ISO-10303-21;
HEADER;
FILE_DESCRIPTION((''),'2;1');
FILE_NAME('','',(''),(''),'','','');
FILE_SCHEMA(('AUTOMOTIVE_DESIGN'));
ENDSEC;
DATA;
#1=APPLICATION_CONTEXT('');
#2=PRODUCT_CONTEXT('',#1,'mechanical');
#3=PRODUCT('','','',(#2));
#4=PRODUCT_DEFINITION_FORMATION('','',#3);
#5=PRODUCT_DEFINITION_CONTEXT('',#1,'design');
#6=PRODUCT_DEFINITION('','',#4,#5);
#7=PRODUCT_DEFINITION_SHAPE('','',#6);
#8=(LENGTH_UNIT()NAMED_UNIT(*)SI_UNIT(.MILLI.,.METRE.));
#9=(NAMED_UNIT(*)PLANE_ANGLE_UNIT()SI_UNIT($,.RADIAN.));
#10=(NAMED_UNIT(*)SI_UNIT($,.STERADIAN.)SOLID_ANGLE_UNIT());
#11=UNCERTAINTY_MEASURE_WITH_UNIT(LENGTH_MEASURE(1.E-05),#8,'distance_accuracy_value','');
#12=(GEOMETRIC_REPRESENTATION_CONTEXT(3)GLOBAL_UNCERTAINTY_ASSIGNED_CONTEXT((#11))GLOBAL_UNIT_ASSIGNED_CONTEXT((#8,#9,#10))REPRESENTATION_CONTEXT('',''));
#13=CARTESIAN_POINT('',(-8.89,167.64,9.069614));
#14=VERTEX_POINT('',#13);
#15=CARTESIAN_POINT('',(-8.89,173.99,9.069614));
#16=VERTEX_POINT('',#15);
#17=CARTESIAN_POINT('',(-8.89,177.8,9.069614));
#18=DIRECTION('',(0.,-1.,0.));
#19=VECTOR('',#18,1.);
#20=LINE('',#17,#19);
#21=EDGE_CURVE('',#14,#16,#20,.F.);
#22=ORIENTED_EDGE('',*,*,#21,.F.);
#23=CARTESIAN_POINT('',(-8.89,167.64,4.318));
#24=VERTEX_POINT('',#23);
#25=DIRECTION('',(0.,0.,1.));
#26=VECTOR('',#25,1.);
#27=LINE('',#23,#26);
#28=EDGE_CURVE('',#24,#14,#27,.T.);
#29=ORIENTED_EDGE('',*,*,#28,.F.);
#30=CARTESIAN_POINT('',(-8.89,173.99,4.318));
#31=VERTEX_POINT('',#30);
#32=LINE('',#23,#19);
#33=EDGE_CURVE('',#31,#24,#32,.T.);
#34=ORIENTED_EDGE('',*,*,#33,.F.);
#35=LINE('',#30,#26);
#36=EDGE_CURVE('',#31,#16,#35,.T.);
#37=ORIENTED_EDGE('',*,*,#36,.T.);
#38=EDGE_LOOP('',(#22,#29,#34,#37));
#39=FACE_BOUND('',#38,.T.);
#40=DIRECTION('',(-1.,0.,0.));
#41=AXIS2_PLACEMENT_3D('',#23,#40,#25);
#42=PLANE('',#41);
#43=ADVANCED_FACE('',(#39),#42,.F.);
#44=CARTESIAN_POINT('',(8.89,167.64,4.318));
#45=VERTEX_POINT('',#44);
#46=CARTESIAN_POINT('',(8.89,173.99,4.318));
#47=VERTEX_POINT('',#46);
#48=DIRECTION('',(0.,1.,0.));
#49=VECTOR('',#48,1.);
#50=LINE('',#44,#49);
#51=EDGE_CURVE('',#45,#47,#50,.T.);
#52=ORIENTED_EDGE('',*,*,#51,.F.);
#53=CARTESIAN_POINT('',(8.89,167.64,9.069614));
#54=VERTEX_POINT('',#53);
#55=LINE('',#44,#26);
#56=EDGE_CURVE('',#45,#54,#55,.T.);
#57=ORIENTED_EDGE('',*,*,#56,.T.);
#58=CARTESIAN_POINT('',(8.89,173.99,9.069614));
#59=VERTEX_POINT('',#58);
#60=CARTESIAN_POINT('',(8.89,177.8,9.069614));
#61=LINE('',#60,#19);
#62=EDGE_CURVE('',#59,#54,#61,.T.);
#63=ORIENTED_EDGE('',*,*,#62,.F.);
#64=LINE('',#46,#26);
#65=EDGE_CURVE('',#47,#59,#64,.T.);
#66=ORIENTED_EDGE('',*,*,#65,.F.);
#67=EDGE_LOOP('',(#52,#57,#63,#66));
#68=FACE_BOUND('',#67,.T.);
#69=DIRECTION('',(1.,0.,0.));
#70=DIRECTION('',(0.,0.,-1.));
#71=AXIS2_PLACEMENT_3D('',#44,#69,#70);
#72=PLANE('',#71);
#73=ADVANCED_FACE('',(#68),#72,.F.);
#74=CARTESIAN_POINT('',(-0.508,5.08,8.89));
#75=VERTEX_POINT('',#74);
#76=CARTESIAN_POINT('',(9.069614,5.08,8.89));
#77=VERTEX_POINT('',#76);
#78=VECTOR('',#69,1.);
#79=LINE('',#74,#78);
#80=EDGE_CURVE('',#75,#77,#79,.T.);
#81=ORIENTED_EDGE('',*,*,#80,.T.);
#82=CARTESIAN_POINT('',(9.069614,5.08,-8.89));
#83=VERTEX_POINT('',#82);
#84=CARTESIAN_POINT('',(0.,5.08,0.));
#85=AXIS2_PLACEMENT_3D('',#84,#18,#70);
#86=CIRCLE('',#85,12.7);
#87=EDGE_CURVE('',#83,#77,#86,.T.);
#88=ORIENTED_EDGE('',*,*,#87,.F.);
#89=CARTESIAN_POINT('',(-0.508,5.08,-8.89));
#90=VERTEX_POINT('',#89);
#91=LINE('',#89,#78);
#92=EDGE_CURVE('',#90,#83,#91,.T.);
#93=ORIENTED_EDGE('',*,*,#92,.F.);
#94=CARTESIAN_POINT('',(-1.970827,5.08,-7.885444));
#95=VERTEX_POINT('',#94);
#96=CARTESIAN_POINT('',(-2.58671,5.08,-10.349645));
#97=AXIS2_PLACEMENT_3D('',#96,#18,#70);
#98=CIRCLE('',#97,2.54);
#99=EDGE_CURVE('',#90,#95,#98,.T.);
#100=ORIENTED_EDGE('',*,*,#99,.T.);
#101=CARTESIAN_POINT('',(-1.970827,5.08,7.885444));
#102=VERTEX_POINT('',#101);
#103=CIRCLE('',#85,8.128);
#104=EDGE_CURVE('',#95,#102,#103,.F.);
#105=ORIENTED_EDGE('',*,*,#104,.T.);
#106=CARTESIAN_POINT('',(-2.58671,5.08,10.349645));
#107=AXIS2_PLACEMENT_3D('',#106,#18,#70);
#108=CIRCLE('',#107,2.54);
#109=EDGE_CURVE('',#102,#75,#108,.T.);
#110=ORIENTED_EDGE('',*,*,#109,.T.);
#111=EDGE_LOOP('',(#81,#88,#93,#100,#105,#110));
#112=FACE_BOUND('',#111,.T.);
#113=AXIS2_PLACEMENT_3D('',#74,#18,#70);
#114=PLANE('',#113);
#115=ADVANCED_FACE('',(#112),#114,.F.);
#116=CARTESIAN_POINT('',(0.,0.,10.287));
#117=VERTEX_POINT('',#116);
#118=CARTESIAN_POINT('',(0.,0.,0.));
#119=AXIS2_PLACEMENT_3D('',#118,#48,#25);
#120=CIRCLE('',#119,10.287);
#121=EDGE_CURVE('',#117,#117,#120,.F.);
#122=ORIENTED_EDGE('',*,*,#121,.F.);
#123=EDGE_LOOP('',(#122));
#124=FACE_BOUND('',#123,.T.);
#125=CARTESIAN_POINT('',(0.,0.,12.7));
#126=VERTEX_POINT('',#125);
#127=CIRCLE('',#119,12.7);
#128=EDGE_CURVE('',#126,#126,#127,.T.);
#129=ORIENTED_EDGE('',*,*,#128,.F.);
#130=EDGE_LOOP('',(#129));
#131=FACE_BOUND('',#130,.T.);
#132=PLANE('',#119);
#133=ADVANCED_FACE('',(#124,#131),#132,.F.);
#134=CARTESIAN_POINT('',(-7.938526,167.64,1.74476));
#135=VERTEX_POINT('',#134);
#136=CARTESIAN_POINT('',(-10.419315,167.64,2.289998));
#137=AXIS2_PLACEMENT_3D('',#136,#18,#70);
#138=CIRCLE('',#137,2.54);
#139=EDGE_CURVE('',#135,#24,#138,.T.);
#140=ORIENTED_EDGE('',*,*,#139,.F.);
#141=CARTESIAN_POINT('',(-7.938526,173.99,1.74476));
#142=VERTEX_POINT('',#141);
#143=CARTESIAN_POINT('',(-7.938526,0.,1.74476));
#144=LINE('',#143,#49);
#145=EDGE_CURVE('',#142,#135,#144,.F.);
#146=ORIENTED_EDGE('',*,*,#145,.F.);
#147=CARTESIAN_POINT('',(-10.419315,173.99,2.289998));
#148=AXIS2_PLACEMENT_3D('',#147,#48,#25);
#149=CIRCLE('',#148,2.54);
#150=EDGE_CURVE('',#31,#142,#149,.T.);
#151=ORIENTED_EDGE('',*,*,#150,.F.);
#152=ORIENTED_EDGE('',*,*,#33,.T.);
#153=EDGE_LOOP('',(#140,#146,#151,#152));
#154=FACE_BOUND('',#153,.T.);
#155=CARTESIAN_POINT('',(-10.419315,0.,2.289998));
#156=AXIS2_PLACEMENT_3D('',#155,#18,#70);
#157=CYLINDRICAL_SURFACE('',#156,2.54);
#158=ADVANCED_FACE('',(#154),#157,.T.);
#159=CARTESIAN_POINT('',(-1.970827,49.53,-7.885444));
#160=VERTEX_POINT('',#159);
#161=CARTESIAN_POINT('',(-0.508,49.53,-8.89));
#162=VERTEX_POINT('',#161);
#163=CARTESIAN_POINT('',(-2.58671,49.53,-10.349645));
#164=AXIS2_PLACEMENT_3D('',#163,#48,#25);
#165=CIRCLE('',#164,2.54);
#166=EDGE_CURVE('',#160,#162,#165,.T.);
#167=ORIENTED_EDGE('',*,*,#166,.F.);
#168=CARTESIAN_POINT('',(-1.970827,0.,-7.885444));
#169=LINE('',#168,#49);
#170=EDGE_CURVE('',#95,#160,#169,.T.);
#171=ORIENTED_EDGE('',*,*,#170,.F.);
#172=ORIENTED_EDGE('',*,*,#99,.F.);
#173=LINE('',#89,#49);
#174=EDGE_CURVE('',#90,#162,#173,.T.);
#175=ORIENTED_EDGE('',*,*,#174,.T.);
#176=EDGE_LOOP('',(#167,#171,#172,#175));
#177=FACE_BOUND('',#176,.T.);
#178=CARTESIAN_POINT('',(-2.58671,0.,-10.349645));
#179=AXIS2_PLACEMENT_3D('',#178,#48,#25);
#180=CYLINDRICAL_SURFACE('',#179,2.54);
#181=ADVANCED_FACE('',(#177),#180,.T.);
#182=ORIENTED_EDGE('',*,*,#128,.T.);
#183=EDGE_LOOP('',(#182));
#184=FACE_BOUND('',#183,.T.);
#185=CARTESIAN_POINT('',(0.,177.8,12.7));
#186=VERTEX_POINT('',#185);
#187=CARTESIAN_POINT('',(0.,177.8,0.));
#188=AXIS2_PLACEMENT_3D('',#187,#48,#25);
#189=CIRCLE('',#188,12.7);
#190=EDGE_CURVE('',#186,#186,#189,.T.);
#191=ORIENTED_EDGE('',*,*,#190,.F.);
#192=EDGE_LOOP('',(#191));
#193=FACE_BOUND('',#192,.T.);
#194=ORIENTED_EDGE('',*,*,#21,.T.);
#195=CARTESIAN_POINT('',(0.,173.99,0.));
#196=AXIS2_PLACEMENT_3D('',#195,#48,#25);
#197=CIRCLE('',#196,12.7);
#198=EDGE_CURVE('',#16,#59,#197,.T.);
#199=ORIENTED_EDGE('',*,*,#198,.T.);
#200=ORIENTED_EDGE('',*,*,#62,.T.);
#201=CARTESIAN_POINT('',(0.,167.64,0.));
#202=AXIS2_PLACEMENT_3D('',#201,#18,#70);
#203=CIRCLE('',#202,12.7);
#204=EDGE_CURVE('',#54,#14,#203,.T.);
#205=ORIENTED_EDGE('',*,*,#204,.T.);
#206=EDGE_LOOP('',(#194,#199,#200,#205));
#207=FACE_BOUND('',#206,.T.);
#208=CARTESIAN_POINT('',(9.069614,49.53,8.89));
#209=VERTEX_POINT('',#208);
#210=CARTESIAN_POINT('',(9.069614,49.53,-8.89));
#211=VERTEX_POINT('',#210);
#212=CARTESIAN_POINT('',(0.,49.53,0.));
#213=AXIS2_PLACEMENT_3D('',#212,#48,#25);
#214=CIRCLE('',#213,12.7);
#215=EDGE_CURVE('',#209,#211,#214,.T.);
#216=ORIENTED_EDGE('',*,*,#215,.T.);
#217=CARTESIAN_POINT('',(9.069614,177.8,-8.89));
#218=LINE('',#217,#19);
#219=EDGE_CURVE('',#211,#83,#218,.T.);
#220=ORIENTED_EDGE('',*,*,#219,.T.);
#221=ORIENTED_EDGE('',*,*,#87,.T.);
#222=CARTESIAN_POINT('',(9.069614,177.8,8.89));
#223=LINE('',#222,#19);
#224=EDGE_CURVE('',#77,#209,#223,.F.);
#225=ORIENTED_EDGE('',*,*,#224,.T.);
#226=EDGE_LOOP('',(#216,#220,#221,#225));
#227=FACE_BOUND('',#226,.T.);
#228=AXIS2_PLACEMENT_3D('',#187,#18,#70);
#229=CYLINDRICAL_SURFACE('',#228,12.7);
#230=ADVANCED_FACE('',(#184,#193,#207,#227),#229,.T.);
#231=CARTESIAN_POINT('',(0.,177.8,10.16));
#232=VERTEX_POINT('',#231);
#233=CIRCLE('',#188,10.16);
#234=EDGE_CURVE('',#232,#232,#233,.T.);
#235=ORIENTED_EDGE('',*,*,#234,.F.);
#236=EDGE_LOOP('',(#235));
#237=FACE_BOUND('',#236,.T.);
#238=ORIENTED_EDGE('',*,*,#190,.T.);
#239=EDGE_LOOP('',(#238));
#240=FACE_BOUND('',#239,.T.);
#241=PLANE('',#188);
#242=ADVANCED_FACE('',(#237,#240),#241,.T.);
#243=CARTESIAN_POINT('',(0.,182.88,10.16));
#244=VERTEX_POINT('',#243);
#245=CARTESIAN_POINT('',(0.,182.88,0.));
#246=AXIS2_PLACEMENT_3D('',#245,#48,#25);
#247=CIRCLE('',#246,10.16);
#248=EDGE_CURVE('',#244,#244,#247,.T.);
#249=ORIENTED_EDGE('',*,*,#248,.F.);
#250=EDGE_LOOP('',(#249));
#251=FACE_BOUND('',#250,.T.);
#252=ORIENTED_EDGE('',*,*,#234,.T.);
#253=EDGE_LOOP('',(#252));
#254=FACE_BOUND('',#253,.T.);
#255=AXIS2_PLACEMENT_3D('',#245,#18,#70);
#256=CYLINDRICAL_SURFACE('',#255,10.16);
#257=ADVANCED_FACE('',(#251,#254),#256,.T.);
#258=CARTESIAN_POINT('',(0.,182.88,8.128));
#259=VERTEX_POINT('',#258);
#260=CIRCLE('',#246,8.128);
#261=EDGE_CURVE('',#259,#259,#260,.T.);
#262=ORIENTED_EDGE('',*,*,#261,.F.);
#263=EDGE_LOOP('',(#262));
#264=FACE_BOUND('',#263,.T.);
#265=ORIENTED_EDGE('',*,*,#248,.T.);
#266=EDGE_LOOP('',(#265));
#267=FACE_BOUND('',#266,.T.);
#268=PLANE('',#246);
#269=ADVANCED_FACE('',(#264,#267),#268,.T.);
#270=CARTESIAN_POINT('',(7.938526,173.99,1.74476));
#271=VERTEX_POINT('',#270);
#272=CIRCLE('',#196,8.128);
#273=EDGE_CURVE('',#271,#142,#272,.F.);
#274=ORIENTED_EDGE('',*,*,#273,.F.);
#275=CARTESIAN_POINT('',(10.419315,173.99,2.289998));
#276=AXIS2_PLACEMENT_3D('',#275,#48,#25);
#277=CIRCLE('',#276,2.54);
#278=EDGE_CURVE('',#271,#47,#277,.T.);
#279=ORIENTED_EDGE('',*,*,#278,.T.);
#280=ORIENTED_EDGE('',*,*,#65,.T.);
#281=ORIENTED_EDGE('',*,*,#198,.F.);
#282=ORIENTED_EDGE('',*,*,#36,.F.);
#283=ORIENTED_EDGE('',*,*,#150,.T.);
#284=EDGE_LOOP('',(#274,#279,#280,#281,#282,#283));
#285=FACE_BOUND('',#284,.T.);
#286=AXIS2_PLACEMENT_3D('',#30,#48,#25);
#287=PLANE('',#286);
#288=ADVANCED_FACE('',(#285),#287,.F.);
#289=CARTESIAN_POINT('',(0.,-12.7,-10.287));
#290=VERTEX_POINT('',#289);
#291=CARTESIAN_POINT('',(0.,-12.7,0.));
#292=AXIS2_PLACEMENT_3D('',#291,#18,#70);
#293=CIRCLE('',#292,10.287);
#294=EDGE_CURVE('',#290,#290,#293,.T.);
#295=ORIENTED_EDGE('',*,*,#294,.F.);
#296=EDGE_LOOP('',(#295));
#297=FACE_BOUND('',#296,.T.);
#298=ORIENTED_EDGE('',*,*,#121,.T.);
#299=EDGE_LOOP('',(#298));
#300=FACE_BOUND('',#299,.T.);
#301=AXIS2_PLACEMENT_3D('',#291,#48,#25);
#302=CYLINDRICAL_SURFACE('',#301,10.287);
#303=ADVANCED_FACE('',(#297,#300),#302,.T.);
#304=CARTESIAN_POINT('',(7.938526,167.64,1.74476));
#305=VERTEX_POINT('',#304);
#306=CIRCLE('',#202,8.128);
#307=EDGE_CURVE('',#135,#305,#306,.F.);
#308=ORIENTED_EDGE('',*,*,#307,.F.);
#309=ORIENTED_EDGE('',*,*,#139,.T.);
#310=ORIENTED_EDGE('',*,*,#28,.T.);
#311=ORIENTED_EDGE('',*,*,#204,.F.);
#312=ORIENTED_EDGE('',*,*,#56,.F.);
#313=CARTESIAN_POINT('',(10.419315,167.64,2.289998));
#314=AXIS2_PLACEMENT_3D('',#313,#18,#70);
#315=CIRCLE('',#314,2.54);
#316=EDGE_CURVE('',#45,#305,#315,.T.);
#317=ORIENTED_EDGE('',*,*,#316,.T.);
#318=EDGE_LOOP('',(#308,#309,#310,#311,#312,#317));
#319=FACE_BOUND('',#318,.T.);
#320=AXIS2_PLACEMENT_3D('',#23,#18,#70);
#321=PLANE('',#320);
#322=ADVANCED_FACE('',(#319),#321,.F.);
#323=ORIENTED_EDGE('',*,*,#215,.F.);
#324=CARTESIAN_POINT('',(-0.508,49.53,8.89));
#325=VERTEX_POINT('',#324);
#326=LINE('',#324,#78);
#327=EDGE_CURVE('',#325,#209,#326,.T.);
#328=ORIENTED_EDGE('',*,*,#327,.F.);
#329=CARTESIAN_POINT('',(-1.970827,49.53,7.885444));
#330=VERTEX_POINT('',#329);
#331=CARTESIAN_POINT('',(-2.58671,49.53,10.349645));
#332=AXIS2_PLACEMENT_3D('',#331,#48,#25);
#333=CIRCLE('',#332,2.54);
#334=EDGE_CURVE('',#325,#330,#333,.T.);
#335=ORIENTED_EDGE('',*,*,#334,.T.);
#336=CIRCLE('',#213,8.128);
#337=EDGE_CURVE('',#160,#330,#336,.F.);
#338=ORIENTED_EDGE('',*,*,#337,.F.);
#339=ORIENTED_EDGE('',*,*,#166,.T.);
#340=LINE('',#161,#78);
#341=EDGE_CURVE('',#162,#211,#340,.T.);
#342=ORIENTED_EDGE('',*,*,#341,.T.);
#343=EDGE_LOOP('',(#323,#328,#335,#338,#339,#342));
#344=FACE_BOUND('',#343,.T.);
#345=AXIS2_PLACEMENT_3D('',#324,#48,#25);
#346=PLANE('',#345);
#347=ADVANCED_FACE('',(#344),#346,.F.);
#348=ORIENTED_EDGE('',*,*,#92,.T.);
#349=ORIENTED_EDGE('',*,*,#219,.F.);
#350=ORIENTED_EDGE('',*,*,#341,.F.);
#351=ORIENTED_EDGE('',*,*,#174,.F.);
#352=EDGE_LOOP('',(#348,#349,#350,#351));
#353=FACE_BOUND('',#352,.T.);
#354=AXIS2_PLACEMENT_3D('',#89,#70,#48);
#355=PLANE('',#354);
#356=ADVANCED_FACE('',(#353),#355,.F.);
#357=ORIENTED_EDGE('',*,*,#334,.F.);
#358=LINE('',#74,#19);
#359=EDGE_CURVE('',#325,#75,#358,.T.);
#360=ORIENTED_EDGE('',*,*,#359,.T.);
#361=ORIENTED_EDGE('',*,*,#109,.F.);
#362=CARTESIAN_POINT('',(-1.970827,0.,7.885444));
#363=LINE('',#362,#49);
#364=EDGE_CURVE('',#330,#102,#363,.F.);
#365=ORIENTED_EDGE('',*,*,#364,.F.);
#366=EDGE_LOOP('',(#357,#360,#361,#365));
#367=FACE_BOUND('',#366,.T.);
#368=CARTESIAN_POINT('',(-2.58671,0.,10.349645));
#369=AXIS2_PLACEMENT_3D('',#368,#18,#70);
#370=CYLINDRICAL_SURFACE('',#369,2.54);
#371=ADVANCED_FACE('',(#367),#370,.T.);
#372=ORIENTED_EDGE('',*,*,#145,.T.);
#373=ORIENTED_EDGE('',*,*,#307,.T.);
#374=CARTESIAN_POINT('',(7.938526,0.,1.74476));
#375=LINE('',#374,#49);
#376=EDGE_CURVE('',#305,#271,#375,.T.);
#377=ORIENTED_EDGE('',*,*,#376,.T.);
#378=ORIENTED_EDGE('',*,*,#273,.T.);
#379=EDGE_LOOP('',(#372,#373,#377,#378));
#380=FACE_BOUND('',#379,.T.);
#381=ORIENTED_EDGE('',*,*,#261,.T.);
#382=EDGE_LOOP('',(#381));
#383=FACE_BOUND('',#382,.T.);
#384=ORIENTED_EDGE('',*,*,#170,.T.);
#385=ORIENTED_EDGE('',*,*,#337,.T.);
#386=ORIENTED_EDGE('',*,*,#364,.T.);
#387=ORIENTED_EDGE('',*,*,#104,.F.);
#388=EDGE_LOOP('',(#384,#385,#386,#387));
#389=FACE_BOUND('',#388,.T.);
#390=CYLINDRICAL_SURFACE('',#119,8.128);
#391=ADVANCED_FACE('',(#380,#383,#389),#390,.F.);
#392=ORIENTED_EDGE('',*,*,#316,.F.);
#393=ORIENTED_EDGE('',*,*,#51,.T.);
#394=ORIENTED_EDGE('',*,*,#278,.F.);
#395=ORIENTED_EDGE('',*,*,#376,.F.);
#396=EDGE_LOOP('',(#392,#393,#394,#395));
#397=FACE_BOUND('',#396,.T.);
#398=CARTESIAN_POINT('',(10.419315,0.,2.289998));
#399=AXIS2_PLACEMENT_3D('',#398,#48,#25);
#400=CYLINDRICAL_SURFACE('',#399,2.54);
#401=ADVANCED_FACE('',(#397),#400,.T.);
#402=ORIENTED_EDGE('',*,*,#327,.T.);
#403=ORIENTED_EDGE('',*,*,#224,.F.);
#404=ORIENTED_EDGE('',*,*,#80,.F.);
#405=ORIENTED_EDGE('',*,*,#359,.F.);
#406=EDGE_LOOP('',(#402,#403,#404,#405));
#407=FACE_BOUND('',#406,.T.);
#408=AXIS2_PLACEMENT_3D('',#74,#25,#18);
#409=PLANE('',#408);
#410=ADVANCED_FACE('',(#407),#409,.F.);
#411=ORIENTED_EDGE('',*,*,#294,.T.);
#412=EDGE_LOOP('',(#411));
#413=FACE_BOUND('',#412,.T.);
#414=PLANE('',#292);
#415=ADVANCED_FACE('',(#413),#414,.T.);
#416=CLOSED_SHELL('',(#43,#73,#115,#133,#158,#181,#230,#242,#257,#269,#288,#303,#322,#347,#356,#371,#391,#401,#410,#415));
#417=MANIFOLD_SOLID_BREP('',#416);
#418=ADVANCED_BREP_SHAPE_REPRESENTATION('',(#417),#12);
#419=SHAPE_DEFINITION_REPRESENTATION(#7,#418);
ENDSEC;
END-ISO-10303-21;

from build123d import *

# Parameters (mm, degrees)
SKETCH1_R           = 12.7
BOSS_EXTRUDE1_DEPTH = 177.8
SKETCH4_R           = 10.16
BOSS_EXTRUDE2_DEPTH = 5.08
SKETCH5_R           = 8.128
CUT_EXTRUDE1_DEPTH  = 184.759828036
SKETCH6_R           = 10.287
SKETCH6_R_2         = 8.128
BOSS_EXTRUDE3_DEPTH = 12.7
SKETCH9_W           = 17.78
SKETCH9_H           = 44.45
CUT_EXTRUDE2_DEPTH  = 14.478
FILLET2_R           = 2.54
BOSS_EXTRUDE4_START = -17.78
SKETCH10_R          = 8.128
BOSS_EXTRUDE4_DEPTH = 17.78
SKETCH11_W          = 17.78
SKETCH11_H          = 6.35
CUT_EXTRUDE3_DEPTH  = 9.652
FILLET3_R           = 2.54


with BuildPart() as part:
    # Sketch1 → Boss-Extrude1 (new body)
    with BuildSketch(Plane(origin=(0, 0, 0), x_dir=(1, 0, 0), z_dir=(0, 1, 0))):
        with Locations(Location((0, 0, 0), (0, 0, 270))):
            Circle(SKETCH1_R)
    extrude(amount=BOSS_EXTRUDE1_DEPTH)

    # Sketch4 → Boss-Extrude2 (add)
    with BuildSketch(Plane(origin=(0, 177.8, 0), x_dir=(1, 0, 0), z_dir=(0, 1, 0))):
        with Locations(Location((0, 0, 0), (0, 0, 270))):
            Circle(SKETCH4_R)
    extrude(amount=BOSS_EXTRUDE2_DEPTH)

    # Sketch5 → Cut-Extrude1 (cut, through all)
    with BuildSketch(Plane(origin=(0, 182.88, 0), x_dir=(1, 0, 0), z_dir=(0, 1, 0))):
        with Locations(Location((0, 0, 0), (0, 0, 270))):
            Circle(SKETCH5_R)
    extrude(amount=-CUT_EXTRUDE1_DEPTH, mode=Mode.SUBTRACT)

    # Sketch6 → Boss-Extrude3 (add)
    with BuildSketch(Plane.XZ):
        with Locations(Location((0, 0, 0), (0, 0, 90))):
            Circle(SKETCH6_R)
        with Locations(Location((0, 0, 0), (0, 0, 90))):
            Circle(SKETCH6_R_2, mode=Mode.SUBTRACT)
    extrude(amount=BOSS_EXTRUDE3_DEPTH)


with BuildPart() as body_2:
    # Split1: the piece on the far side of the plane
    add(part.part)
    split(bisect_by=Plane(origin=(0, 2.54, 0), x_dir=(0, 0, -1), z_dir=(0, -1, 0)), keep=Keep.BOTTOM)

    # Sketch9 → Cut-Extrude2 (cut)
    with BuildSketch(Plane(origin=(13.97, 0, 0), x_dir=(0, 0, -1), z_dir=(1, 0, 0))):
        with Locations((0, 27.305)):
            Rectangle(SKETCH9_W, SKETCH9_H)
    extrude(amount=-CUT_EXTRUDE2_DEPTH, mode=Mode.SUBTRACT)

    # Fillet2
    # the kernel refuses this fillet: 2.54 mm, written as the material it takes off along each edge
    with BuildSketch(Plane(origin=(-0.508, 5.08, -8.112109467), x_dir=(-0.988207128280474, 0, 0.15312306036537704), z_dir=(0, 1, 0))) as fillet2_piece_1:
        with BuildLine():
            CenterArc((1.711577927, -2.529447161), FILLET2_R, 95.224634403, 40.891343564)
            Line((-0.119112979, -0.76871697), (-0.155726797, -0.733502366))
            ThreePointArc((-0.155726797, -0.733502366), (-0.109757412, -0.376579834), (-0.050200922, 0.007778651))
            Line((-0.050200922, 0.007778651), (0.004625886, 0.050588943))
            ThreePointArc((0.004625886, 0.050588943), (0.740141806, 0.017030915), (1.475657727, 0.050588943))
            Line((1.475657727, 0.050588943), (1.480283613, 0))
        make_face()
    extrude(amount=44.45, mode=Mode.SUBTRACT)
    with BuildSketch(Plane(origin=(-0.508, 5.08, 8.112109467), x_dir=(-0.9882071282804739, 0, -0.15312306036537726), z_dir=(0, 1, 0))) as fillet2_piece_2:
        with BuildLine():
            CenterArc((1.711577927, 2.529447161), FILLET2_R, 223.884022033, 40.891343564)
            Line((-0.119112979, 0.76871697), (-0.155726797, 0.733502366))
            ThreePointArc((-0.155726797, 0.733502366), (-0.109757412, 0.376579834), (-0.050200922, -0.007778651))
            Line((-0.050200922, -0.007778651), (0.004625886, -0.050588943))
            ThreePointArc((0.004625886, -0.050588943), (0.740141806, -0.017030915), (1.475657727, -0.050588943))
            Line((1.475657727, -0.050588943), (1.480283613, 0))
        make_face()
    extrude(amount=44.45, mode=Mode.SUBTRACT)


with BuildPart() as part_1:
    add(part.part)

    # Split1
    split(bisect_by=Plane(origin=(0, 2.54, 0), x_dir=(0, 0, -1), z_dir=(0, -1, 0)), keep=Keep.TOP)

    add(body_2.part)  # Boss-Extrude4 merges body 2
    # Sketch10 → Boss-Extrude4 (add)
    with BuildSketch(Plane.XZ.offset(12.7).offset(BOSS_EXTRUDE4_START)):
        with Locations(Location((0, 0, 0), (0, 0, 90))):
            Circle(SKETCH10_R)
    extrude(amount=BOSS_EXTRUDE4_DEPTH)

    # Sketch11 → Cut-Extrude3 (cut)
    with BuildSketch(Plane.XY.offset(13.97)):
        with Locations((0, 170.815)):
            Rectangle(SKETCH11_W, SKETCH11_H)
    extrude(amount=-CUT_EXTRUDE3_DEPTH, mode=Mode.SUBTRACT)

    # Fillet3
    # the kernel refuses this fillet: 2.54 mm, written as the material it takes off along each edge
    with BuildSketch(Plane(origin=(-6.88616439, 167.64, 4.318), x_dir=(-1, 0, 0), z_dir=(0, 1, 0))) as fillet3_piece_1:
        with BuildLine():
            CenterArc((3.533151107, -2.028002493), FILLET3_R, 127.019924819, 65.375681648)
            Line((1.052361703, -2.573239995), (1.002745915, -2.584144745))
            ThreePointArc((1.002745915, -2.584144745), (0.589996771, -1.260521604), (-0.043038527, -0.0269875))
            Line((-0.043038527, -0.0269875), (0, 0.0508))
            ThreePointArc((0, 0.0508), (1.001917805, 0.0508), (1.973249301, 0.04056005))
            Line((1.973249301, 0.04056005), (2.00383561, 0))
        make_face()
    extrude(amount=6.35, mode=Mode.SUBTRACT)
    with BuildSketch(Plane(origin=(6.88616439, 167.64, 4.318), x_dir=(0.3785319660304678, 0, -0.9255882187523287), z_dir=(0, 1, 0))) as fillet3_piece_2:
        with BuildLine():
            CenterArc((3.21450585, -2.502579269), FILLET3_R, 99.847172395, 65.375681648)
            Line((0.758515833, -1.854726633), (0.709396033, -1.841769581))
            ThreePointArc((0.709396033, -1.841769581), (0.332238035, -0.946592741), (-0.047019882, -0.019229424))
            Line((-0.047019882, -0.019229424), (0.008687854, 0.050051585))
            ThreePointArc((0.008687854, 0.050051585), (1.390056584, -0.068946339), (2.771425314, 0.050051585))
            Line((2.771425314, 0.050051585), (2.780113168, 0))
        make_face()
    extrude(amount=6.35, mode=Mode.SUBTRACT)


solid = part_1.part
